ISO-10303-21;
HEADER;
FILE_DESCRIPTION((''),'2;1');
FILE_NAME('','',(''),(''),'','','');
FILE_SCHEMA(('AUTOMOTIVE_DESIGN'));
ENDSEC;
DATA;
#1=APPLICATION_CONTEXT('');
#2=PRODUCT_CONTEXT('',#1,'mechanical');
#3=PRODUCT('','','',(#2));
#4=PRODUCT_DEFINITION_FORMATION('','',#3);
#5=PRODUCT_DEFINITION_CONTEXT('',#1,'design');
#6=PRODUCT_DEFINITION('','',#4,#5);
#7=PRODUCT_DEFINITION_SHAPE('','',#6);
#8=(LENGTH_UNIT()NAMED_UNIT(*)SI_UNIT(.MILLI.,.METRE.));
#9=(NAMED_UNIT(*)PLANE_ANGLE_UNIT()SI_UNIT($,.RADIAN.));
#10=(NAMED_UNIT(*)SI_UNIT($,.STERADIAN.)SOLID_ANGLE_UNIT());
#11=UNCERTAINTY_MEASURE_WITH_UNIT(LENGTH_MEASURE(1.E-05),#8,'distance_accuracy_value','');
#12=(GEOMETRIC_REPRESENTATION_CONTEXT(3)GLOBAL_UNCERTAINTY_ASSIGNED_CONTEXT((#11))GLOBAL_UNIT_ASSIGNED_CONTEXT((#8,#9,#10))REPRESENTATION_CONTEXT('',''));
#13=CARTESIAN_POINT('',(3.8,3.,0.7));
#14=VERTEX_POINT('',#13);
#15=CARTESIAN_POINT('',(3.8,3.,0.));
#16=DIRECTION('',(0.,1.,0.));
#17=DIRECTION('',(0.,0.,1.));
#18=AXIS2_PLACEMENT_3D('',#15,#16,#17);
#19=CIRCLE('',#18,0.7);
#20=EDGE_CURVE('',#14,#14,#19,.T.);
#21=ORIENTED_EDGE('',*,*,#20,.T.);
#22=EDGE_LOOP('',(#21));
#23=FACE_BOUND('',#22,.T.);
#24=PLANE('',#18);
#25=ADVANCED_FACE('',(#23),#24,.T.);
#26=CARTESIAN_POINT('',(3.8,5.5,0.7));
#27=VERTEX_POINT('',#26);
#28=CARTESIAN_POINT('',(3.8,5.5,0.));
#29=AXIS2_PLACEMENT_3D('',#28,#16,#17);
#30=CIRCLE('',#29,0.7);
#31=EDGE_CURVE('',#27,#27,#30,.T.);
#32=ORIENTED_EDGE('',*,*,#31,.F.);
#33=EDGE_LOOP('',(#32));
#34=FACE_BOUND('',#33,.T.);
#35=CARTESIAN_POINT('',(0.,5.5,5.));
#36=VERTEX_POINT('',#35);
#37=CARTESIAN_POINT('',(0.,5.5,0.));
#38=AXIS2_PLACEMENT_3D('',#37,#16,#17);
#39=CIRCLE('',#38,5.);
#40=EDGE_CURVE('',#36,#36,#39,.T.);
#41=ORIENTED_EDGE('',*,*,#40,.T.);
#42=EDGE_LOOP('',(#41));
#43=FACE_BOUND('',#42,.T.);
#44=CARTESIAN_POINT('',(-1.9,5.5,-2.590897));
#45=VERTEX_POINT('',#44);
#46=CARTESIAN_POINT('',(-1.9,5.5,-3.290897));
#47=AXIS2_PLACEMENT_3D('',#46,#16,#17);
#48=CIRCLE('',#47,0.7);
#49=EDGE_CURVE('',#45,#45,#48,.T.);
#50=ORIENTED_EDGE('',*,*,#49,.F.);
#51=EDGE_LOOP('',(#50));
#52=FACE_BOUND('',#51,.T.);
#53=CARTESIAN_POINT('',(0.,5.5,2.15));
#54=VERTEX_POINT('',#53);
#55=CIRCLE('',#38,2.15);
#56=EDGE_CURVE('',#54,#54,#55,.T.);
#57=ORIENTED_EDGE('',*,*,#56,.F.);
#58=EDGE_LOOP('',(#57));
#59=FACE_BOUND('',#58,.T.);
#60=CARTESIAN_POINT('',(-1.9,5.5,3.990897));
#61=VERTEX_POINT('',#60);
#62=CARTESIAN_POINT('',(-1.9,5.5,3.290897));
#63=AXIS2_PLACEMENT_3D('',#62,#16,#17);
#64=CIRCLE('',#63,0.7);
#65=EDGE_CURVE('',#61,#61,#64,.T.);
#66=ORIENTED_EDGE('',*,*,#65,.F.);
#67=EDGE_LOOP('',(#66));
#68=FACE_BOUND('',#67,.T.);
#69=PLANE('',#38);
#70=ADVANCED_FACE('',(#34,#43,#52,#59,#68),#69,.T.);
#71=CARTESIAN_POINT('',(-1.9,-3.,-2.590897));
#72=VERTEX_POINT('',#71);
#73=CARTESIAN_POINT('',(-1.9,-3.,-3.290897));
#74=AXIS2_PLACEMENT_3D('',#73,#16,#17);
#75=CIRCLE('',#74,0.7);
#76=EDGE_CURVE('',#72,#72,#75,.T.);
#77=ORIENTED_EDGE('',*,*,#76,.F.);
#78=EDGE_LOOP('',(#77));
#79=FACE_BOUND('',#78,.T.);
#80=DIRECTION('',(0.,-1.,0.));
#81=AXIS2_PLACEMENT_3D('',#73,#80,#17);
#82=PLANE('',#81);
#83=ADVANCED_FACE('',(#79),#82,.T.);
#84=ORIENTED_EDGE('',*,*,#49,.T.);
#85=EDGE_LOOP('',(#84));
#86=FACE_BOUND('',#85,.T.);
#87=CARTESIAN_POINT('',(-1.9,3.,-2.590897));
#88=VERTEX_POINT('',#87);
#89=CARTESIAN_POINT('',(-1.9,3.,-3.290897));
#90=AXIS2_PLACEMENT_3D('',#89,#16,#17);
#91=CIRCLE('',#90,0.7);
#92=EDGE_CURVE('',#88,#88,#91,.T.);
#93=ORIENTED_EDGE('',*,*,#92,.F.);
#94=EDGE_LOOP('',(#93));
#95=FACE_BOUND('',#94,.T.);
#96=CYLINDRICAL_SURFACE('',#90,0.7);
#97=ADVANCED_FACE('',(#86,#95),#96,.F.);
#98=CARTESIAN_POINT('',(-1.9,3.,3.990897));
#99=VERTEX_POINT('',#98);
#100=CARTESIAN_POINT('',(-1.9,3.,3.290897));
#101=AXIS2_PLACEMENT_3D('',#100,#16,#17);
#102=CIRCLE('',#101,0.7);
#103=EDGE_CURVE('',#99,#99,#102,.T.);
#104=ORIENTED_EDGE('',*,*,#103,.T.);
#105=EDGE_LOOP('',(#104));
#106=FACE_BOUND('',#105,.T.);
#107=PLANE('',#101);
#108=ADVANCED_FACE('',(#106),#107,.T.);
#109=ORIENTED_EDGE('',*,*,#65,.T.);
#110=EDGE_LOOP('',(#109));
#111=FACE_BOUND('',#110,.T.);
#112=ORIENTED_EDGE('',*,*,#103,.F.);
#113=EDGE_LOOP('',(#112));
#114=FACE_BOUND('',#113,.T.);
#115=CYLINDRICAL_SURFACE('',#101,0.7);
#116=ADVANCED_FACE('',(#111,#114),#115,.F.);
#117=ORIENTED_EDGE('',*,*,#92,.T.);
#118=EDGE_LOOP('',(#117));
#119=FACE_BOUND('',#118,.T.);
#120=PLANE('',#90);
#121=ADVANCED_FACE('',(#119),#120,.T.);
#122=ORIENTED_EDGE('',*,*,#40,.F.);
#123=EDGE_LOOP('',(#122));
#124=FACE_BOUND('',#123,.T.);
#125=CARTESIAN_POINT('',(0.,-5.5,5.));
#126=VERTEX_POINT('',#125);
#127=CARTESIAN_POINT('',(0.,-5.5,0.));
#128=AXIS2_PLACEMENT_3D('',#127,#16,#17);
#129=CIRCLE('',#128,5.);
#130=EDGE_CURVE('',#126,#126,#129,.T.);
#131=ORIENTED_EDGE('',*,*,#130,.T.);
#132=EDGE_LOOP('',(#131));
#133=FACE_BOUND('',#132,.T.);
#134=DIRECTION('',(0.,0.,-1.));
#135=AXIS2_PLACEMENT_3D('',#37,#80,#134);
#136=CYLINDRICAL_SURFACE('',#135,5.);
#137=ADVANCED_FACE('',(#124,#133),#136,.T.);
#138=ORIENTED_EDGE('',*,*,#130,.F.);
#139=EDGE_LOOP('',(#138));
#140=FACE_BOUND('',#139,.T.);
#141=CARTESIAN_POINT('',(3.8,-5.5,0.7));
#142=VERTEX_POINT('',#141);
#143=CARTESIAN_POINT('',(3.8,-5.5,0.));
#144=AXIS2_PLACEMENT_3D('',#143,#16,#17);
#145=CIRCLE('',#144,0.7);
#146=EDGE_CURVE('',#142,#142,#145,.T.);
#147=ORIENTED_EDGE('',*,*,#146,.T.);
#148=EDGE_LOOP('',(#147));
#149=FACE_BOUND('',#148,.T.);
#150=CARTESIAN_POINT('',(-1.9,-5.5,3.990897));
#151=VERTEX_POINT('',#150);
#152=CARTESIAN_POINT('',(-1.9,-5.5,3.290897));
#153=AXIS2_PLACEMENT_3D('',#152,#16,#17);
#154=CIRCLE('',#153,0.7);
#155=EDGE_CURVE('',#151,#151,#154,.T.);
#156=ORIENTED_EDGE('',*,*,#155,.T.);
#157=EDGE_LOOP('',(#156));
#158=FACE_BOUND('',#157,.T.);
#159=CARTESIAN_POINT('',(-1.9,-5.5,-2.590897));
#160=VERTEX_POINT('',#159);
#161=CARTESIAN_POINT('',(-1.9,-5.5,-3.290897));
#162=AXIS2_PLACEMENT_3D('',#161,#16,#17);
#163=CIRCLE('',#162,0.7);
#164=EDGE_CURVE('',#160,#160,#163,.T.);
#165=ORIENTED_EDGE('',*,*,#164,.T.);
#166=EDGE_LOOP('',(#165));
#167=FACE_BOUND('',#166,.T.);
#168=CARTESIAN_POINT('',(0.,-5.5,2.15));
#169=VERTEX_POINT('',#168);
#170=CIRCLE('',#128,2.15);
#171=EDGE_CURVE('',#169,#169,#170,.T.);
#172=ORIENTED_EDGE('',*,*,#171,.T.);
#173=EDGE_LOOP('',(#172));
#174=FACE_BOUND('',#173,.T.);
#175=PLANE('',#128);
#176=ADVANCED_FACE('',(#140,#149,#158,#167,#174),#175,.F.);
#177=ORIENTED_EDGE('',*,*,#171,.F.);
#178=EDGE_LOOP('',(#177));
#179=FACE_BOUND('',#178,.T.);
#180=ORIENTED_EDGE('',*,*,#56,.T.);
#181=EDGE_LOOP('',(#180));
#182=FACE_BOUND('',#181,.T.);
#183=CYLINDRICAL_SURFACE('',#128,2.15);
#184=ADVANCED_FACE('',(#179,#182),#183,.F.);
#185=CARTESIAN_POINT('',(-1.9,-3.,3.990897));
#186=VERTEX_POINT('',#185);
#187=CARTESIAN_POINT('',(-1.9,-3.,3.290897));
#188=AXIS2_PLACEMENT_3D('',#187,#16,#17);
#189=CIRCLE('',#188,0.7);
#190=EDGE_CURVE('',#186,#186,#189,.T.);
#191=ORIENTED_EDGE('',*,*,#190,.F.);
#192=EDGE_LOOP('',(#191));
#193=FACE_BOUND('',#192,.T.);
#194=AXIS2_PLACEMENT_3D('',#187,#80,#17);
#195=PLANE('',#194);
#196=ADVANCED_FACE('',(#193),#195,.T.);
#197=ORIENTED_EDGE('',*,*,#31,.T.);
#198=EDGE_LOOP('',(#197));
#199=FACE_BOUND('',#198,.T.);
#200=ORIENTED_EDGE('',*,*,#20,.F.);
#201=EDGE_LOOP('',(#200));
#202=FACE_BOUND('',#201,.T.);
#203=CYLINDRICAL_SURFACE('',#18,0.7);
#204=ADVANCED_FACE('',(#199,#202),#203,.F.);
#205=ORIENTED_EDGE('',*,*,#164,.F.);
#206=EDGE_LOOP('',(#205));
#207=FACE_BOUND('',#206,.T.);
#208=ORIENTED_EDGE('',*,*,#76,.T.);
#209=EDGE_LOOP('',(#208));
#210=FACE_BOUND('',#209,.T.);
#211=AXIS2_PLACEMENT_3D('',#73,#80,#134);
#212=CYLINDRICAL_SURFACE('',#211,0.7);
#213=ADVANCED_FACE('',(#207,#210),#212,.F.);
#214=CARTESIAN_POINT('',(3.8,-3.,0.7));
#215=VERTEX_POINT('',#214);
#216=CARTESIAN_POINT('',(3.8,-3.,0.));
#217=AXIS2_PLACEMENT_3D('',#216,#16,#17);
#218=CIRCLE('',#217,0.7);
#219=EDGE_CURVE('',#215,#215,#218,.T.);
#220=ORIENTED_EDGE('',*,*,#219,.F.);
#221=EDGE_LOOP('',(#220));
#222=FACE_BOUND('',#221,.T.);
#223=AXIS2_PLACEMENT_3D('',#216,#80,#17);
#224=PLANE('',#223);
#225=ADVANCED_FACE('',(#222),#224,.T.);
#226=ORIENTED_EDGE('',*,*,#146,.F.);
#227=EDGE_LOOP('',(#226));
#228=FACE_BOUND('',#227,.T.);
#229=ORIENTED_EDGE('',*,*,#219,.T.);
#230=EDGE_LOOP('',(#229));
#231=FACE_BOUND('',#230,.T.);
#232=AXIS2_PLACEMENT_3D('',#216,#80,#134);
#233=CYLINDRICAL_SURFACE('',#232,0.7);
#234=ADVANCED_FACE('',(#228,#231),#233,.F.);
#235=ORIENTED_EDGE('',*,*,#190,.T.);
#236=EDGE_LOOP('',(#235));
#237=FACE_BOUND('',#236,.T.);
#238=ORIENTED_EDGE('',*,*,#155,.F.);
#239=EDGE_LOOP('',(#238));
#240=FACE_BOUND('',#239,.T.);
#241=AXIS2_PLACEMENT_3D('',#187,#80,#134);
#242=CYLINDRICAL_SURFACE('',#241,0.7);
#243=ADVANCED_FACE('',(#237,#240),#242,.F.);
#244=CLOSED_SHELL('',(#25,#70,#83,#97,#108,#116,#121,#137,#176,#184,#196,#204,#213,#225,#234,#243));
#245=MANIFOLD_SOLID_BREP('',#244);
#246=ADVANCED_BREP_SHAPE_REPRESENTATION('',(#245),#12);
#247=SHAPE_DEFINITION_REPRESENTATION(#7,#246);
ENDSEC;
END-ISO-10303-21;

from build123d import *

# Parameters (mm, degrees)
SKETCH1_R           = 5
BOSS_EXTRUDE1_DEPTH = 5.5
SKETCH2_R           = 0.7
CUT_EXTRUDE1_DEPTH  = 2.5
HOLE1_START         = -5.5
HOLE1_OUTLINE_R     = 2.15
HOLE1_DEPTH         = 11


# Read off the part's stored shape, not the designer's step: Hole1
with BuildPart() as part:
    # Sketch1 → Boss-Extrude1 (new, symmetric)
    with BuildSketch(Plane(origin=(0, 0, 0), x_dir=(1, 0, 0), z_dir=(0, 1, 0))):
        with Locations(Location((0, 0, 0), (0, 0, 270))):
            Circle(SKETCH1_R)
    extrude(amount=BOSS_EXTRUDE1_DEPTH, both=True)

    # Sketch2 → Cut-Extrude1 (cut)
    with BuildSketch(Plane(origin=(0, 5.5, 0), x_dir=(1, 0, 0), z_dir=(0, 1, 0))):
        with Locations(Location((3.8, 0, 0), (0, 0, 270))):
            Circle(SKETCH2_R)
        with Locations(Location((-1.9, -3.290896534, 0), (0, 0, 270))):
            Circle(SKETCH2_R)
        with Locations(Location((-1.9, 3.290896534, 0), (0, 0, 270))):
            Circle(SKETCH2_R)
    cut_extrude1 = extrude(amount=-CUT_EXTRUDE1_DEPTH, mode=Mode.SUBTRACT)

    # Mirror1: Cut-Extrude1 across plane
    add(cut_extrude1.mirror(Plane.ZX), mode=Mode.SUBTRACT)

    # Hole1 outline → Hole1 (cut)
    with BuildSketch(Plane(origin=(0, 0, 0), x_dir=(1, 0, 0), z_dir=(0, 1, 0)).offset(HOLE1_START)):
        Circle(HOLE1_OUTLINE_R)
    extrude(amount=HOLE1_DEPTH, mode=Mode.SUBTRACT)


solid = part.part
